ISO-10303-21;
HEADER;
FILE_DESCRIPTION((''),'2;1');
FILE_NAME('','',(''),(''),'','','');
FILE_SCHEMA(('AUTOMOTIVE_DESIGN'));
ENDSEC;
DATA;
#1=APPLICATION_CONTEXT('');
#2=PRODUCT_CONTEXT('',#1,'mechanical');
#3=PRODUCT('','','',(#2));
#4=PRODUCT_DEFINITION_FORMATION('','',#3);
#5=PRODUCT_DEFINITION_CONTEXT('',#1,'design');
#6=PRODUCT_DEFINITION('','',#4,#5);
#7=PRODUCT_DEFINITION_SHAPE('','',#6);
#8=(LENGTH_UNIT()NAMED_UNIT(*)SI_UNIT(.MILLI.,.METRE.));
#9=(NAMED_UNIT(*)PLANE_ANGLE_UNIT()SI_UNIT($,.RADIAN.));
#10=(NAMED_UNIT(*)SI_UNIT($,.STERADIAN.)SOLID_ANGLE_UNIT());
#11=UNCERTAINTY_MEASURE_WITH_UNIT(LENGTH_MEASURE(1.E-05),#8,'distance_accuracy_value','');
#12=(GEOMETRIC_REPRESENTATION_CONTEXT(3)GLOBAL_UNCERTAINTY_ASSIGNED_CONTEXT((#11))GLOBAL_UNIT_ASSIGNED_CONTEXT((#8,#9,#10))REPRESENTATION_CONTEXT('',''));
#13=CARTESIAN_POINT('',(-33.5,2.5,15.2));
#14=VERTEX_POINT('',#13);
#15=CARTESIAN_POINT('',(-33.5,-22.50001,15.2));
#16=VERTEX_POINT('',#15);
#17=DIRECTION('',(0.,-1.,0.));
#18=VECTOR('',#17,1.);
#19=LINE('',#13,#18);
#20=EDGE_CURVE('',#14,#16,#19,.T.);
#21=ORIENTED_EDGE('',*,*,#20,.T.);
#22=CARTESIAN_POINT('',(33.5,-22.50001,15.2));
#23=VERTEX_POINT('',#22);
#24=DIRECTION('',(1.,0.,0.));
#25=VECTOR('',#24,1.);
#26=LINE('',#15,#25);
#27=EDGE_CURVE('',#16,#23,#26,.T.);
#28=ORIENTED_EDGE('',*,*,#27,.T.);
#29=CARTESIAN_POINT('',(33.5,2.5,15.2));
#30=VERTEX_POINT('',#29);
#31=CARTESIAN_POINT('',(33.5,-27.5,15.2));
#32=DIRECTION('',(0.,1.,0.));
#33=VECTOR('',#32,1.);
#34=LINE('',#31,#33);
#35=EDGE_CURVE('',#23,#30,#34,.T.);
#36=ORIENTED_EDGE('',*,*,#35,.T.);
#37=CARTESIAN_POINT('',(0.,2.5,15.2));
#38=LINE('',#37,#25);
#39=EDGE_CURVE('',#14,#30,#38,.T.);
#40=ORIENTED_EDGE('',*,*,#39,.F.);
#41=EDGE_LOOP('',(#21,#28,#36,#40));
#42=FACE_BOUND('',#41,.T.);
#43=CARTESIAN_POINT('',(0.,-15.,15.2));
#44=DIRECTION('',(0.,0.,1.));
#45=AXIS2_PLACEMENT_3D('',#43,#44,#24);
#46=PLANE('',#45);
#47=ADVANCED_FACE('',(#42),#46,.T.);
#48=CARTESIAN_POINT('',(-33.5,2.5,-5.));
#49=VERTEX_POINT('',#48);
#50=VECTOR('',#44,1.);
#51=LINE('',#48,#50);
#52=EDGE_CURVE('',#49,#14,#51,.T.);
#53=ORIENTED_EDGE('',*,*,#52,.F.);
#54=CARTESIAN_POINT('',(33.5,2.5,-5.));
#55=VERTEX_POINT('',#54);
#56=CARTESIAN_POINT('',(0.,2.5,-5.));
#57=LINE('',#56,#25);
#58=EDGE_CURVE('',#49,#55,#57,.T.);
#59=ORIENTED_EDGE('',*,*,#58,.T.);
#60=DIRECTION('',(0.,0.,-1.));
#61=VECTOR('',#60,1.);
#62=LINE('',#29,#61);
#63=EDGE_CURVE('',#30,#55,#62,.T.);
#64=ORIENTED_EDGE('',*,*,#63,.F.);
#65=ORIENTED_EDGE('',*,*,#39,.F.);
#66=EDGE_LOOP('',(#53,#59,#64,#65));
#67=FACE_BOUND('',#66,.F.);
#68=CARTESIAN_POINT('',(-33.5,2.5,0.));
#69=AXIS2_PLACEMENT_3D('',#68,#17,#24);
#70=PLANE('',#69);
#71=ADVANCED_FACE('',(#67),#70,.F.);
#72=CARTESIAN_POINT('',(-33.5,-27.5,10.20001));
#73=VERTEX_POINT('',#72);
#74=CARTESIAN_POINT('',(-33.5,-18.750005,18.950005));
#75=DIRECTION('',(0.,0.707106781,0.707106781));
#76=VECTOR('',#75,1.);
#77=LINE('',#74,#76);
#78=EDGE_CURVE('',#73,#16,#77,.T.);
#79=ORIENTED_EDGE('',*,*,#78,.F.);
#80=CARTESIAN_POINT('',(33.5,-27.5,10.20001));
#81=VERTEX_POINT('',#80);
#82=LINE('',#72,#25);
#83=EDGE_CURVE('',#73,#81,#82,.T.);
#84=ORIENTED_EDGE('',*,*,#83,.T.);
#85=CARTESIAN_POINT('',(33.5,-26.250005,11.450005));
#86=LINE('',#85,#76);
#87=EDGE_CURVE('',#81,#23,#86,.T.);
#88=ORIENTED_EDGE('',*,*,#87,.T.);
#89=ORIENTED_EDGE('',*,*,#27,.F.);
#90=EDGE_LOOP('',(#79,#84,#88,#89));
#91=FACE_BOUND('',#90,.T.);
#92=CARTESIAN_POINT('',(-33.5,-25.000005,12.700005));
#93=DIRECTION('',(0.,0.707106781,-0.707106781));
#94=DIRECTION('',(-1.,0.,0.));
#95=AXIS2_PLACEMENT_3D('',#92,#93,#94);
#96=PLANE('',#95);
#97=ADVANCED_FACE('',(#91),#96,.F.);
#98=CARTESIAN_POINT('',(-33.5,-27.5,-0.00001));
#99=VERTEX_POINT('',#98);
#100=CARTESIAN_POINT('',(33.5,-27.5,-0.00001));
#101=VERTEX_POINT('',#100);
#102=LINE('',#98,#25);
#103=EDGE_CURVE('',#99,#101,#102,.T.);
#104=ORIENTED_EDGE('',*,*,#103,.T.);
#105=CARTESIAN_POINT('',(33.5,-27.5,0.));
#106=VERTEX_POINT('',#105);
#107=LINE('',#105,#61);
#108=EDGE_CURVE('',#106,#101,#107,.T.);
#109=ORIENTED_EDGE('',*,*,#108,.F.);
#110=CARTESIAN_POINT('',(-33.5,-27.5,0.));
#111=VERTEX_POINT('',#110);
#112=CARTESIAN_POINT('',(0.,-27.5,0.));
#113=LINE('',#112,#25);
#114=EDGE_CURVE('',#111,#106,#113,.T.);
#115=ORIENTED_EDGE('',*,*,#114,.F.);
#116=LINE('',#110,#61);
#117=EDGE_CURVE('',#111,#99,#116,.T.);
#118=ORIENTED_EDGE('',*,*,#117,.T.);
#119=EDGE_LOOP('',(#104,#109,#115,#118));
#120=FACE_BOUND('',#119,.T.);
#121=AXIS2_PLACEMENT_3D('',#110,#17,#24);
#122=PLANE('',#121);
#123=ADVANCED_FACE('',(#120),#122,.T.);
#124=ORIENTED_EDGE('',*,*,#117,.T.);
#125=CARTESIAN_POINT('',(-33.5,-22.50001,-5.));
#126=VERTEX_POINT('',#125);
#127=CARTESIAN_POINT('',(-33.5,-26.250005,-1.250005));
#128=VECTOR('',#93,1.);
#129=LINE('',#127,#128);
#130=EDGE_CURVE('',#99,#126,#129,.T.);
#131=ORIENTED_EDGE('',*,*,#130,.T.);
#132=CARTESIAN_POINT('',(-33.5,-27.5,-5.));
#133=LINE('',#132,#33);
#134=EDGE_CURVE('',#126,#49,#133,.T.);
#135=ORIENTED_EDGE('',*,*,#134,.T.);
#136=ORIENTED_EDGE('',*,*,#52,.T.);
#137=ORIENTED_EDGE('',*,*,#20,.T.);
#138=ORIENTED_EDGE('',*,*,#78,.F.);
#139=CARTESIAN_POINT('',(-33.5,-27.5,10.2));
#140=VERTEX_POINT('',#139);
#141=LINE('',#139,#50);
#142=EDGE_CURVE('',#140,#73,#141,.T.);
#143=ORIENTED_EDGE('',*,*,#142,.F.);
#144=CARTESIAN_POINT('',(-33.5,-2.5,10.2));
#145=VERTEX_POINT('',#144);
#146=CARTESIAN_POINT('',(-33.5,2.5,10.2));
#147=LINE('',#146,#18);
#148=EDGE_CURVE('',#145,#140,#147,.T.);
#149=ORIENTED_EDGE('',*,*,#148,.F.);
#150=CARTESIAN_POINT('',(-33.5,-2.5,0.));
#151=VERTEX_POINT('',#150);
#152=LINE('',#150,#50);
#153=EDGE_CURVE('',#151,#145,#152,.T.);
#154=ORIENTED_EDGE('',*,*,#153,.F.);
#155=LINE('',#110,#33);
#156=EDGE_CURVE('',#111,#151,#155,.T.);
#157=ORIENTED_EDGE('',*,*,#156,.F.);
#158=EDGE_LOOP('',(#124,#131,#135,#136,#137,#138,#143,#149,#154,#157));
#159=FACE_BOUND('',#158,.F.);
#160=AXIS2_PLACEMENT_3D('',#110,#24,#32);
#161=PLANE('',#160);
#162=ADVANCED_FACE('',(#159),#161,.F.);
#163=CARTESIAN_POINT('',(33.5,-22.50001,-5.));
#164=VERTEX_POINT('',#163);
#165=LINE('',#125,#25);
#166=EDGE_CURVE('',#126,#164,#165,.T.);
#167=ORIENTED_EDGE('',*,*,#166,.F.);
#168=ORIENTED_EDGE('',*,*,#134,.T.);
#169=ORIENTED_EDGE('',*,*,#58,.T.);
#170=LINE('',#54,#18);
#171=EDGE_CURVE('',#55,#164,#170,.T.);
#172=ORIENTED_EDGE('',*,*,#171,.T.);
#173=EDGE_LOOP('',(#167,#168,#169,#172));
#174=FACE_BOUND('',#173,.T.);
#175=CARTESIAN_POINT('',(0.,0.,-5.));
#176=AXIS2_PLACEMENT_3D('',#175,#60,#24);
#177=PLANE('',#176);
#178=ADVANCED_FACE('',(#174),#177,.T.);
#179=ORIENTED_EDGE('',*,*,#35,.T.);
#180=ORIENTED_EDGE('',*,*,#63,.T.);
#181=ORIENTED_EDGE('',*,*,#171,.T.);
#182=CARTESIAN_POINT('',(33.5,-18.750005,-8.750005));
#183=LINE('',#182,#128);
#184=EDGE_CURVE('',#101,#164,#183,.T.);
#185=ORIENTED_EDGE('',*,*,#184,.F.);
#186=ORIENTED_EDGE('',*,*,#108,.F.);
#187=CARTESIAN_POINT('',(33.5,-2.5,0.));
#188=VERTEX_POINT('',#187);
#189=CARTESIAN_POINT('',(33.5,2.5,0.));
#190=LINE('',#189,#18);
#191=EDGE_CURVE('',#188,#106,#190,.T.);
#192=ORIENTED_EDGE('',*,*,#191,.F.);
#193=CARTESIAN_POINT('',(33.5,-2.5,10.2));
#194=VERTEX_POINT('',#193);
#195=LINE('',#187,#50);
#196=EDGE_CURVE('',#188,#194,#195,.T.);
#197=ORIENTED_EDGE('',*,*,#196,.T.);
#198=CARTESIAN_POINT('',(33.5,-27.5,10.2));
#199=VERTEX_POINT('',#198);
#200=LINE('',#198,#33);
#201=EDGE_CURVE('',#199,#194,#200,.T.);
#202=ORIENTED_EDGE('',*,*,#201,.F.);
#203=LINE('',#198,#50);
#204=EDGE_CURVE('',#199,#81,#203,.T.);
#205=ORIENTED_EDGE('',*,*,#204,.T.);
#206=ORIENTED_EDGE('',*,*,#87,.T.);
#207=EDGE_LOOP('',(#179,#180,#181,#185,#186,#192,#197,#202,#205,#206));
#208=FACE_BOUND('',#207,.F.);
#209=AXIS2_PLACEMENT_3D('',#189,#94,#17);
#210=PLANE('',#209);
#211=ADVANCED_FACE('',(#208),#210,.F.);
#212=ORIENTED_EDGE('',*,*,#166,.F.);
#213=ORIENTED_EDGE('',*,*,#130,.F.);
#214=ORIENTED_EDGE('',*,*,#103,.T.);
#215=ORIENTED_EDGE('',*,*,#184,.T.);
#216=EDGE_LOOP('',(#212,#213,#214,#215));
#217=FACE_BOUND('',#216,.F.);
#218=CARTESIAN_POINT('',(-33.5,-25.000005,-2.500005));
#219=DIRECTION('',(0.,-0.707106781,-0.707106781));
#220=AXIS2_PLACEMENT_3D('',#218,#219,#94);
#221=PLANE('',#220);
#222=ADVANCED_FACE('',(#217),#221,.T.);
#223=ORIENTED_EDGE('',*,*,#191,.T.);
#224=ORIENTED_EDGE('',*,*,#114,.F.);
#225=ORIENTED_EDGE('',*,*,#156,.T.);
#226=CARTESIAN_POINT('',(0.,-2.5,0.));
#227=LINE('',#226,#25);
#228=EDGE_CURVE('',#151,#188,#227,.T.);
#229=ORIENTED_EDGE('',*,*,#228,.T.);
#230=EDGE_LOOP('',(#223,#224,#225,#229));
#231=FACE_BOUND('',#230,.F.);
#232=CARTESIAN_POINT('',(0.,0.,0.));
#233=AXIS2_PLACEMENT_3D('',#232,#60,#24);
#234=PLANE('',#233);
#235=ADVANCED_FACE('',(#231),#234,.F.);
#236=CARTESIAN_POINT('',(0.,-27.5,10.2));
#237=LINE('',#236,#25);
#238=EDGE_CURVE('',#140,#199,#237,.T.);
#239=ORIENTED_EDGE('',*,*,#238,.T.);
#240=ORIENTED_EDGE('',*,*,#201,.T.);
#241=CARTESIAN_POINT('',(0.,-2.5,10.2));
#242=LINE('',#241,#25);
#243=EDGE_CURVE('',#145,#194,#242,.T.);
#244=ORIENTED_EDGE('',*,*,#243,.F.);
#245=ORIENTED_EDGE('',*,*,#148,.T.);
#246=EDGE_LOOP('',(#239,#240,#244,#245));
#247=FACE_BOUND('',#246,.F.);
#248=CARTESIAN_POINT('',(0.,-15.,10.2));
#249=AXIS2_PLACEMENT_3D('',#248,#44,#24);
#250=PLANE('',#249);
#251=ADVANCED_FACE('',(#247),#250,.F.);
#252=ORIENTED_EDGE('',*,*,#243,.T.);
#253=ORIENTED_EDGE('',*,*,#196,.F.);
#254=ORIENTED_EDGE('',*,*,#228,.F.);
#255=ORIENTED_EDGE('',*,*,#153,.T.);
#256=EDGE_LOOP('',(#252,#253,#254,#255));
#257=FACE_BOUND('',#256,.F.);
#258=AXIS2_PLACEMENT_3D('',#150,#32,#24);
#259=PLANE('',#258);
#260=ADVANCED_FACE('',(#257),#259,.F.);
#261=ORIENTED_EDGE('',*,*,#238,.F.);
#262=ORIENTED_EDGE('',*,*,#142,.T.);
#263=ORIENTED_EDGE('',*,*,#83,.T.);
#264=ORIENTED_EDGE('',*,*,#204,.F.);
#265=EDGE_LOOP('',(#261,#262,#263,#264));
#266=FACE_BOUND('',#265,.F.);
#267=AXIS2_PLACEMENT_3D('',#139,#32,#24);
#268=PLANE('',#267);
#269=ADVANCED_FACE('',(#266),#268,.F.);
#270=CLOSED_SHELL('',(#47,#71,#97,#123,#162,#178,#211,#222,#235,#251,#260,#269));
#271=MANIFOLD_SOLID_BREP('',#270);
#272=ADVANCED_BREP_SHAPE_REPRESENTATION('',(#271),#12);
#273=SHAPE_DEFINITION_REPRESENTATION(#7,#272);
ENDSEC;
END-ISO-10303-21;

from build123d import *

# Parameters (mm, degrees)
F0_W     = 67
F0_H     = 5
F1_DEPTH = 10.2
F2_W     = 67
F2_H     = 25
F2_H_2   = 5
F3_DEPTH = 5
F4_SIZE  = 4.99999
F5_W     = 67
F5_H     = 5
F5_H_2   = 25
F6_DEPTH = 5
F7_SIZE  = 4.99999


# Not quite as in the source:
# - a fillet or chamfer is up to 0.001 mm smaller than in the source, because OpenCascade refuses the exact size


with BuildPart() as f1:
    # F0 (on Top) → F1 (new body)
    with BuildSketch(Plane.XY):
        Rectangle(F0_W, F0_H)
    extrude(amount=F1_DEPTH)

    # F2 (on face) → F3 (join)
    with BuildSketch(Plane.XY.offset(10.2)):
        with Locations((0, -15)):
            Rectangle(F2_W, F2_H)
        Rectangle(F2_W, F2_H_2)
    extrude(amount=F3_DEPTH)

    # F4 (size 5 in the source; OpenCascade refuses exactly that, so slightly less here)
    f4_edges = [f1.edges().sort_by_distance(p)[0] for p in [
        (0, -27.5, 15.2),
    ]]
    chamfer(f4_edges, length=F4_SIZE)

    # F5 (on face) → F6 (join)
    with BuildSketch(Plane(origin=(0, 0, 0), x_dir=(1, 0, 0), z_dir=(0, 0, -1))):
        Rectangle(F5_W, F5_H)
        with Locations((0, 15)):
            Rectangle(F5_W, F5_H_2)
    extrude(amount=F6_DEPTH)

    # F7 (size 5 in the source; OpenCascade refuses exactly that, so slightly less here)
    f7_edges = [f1.edges().sort_by_distance(p)[0] for p in [
        (0, -27.5, -5),
    ]]
    chamfer(f7_edges, length=F7_SIZE)


solid = f1.part
